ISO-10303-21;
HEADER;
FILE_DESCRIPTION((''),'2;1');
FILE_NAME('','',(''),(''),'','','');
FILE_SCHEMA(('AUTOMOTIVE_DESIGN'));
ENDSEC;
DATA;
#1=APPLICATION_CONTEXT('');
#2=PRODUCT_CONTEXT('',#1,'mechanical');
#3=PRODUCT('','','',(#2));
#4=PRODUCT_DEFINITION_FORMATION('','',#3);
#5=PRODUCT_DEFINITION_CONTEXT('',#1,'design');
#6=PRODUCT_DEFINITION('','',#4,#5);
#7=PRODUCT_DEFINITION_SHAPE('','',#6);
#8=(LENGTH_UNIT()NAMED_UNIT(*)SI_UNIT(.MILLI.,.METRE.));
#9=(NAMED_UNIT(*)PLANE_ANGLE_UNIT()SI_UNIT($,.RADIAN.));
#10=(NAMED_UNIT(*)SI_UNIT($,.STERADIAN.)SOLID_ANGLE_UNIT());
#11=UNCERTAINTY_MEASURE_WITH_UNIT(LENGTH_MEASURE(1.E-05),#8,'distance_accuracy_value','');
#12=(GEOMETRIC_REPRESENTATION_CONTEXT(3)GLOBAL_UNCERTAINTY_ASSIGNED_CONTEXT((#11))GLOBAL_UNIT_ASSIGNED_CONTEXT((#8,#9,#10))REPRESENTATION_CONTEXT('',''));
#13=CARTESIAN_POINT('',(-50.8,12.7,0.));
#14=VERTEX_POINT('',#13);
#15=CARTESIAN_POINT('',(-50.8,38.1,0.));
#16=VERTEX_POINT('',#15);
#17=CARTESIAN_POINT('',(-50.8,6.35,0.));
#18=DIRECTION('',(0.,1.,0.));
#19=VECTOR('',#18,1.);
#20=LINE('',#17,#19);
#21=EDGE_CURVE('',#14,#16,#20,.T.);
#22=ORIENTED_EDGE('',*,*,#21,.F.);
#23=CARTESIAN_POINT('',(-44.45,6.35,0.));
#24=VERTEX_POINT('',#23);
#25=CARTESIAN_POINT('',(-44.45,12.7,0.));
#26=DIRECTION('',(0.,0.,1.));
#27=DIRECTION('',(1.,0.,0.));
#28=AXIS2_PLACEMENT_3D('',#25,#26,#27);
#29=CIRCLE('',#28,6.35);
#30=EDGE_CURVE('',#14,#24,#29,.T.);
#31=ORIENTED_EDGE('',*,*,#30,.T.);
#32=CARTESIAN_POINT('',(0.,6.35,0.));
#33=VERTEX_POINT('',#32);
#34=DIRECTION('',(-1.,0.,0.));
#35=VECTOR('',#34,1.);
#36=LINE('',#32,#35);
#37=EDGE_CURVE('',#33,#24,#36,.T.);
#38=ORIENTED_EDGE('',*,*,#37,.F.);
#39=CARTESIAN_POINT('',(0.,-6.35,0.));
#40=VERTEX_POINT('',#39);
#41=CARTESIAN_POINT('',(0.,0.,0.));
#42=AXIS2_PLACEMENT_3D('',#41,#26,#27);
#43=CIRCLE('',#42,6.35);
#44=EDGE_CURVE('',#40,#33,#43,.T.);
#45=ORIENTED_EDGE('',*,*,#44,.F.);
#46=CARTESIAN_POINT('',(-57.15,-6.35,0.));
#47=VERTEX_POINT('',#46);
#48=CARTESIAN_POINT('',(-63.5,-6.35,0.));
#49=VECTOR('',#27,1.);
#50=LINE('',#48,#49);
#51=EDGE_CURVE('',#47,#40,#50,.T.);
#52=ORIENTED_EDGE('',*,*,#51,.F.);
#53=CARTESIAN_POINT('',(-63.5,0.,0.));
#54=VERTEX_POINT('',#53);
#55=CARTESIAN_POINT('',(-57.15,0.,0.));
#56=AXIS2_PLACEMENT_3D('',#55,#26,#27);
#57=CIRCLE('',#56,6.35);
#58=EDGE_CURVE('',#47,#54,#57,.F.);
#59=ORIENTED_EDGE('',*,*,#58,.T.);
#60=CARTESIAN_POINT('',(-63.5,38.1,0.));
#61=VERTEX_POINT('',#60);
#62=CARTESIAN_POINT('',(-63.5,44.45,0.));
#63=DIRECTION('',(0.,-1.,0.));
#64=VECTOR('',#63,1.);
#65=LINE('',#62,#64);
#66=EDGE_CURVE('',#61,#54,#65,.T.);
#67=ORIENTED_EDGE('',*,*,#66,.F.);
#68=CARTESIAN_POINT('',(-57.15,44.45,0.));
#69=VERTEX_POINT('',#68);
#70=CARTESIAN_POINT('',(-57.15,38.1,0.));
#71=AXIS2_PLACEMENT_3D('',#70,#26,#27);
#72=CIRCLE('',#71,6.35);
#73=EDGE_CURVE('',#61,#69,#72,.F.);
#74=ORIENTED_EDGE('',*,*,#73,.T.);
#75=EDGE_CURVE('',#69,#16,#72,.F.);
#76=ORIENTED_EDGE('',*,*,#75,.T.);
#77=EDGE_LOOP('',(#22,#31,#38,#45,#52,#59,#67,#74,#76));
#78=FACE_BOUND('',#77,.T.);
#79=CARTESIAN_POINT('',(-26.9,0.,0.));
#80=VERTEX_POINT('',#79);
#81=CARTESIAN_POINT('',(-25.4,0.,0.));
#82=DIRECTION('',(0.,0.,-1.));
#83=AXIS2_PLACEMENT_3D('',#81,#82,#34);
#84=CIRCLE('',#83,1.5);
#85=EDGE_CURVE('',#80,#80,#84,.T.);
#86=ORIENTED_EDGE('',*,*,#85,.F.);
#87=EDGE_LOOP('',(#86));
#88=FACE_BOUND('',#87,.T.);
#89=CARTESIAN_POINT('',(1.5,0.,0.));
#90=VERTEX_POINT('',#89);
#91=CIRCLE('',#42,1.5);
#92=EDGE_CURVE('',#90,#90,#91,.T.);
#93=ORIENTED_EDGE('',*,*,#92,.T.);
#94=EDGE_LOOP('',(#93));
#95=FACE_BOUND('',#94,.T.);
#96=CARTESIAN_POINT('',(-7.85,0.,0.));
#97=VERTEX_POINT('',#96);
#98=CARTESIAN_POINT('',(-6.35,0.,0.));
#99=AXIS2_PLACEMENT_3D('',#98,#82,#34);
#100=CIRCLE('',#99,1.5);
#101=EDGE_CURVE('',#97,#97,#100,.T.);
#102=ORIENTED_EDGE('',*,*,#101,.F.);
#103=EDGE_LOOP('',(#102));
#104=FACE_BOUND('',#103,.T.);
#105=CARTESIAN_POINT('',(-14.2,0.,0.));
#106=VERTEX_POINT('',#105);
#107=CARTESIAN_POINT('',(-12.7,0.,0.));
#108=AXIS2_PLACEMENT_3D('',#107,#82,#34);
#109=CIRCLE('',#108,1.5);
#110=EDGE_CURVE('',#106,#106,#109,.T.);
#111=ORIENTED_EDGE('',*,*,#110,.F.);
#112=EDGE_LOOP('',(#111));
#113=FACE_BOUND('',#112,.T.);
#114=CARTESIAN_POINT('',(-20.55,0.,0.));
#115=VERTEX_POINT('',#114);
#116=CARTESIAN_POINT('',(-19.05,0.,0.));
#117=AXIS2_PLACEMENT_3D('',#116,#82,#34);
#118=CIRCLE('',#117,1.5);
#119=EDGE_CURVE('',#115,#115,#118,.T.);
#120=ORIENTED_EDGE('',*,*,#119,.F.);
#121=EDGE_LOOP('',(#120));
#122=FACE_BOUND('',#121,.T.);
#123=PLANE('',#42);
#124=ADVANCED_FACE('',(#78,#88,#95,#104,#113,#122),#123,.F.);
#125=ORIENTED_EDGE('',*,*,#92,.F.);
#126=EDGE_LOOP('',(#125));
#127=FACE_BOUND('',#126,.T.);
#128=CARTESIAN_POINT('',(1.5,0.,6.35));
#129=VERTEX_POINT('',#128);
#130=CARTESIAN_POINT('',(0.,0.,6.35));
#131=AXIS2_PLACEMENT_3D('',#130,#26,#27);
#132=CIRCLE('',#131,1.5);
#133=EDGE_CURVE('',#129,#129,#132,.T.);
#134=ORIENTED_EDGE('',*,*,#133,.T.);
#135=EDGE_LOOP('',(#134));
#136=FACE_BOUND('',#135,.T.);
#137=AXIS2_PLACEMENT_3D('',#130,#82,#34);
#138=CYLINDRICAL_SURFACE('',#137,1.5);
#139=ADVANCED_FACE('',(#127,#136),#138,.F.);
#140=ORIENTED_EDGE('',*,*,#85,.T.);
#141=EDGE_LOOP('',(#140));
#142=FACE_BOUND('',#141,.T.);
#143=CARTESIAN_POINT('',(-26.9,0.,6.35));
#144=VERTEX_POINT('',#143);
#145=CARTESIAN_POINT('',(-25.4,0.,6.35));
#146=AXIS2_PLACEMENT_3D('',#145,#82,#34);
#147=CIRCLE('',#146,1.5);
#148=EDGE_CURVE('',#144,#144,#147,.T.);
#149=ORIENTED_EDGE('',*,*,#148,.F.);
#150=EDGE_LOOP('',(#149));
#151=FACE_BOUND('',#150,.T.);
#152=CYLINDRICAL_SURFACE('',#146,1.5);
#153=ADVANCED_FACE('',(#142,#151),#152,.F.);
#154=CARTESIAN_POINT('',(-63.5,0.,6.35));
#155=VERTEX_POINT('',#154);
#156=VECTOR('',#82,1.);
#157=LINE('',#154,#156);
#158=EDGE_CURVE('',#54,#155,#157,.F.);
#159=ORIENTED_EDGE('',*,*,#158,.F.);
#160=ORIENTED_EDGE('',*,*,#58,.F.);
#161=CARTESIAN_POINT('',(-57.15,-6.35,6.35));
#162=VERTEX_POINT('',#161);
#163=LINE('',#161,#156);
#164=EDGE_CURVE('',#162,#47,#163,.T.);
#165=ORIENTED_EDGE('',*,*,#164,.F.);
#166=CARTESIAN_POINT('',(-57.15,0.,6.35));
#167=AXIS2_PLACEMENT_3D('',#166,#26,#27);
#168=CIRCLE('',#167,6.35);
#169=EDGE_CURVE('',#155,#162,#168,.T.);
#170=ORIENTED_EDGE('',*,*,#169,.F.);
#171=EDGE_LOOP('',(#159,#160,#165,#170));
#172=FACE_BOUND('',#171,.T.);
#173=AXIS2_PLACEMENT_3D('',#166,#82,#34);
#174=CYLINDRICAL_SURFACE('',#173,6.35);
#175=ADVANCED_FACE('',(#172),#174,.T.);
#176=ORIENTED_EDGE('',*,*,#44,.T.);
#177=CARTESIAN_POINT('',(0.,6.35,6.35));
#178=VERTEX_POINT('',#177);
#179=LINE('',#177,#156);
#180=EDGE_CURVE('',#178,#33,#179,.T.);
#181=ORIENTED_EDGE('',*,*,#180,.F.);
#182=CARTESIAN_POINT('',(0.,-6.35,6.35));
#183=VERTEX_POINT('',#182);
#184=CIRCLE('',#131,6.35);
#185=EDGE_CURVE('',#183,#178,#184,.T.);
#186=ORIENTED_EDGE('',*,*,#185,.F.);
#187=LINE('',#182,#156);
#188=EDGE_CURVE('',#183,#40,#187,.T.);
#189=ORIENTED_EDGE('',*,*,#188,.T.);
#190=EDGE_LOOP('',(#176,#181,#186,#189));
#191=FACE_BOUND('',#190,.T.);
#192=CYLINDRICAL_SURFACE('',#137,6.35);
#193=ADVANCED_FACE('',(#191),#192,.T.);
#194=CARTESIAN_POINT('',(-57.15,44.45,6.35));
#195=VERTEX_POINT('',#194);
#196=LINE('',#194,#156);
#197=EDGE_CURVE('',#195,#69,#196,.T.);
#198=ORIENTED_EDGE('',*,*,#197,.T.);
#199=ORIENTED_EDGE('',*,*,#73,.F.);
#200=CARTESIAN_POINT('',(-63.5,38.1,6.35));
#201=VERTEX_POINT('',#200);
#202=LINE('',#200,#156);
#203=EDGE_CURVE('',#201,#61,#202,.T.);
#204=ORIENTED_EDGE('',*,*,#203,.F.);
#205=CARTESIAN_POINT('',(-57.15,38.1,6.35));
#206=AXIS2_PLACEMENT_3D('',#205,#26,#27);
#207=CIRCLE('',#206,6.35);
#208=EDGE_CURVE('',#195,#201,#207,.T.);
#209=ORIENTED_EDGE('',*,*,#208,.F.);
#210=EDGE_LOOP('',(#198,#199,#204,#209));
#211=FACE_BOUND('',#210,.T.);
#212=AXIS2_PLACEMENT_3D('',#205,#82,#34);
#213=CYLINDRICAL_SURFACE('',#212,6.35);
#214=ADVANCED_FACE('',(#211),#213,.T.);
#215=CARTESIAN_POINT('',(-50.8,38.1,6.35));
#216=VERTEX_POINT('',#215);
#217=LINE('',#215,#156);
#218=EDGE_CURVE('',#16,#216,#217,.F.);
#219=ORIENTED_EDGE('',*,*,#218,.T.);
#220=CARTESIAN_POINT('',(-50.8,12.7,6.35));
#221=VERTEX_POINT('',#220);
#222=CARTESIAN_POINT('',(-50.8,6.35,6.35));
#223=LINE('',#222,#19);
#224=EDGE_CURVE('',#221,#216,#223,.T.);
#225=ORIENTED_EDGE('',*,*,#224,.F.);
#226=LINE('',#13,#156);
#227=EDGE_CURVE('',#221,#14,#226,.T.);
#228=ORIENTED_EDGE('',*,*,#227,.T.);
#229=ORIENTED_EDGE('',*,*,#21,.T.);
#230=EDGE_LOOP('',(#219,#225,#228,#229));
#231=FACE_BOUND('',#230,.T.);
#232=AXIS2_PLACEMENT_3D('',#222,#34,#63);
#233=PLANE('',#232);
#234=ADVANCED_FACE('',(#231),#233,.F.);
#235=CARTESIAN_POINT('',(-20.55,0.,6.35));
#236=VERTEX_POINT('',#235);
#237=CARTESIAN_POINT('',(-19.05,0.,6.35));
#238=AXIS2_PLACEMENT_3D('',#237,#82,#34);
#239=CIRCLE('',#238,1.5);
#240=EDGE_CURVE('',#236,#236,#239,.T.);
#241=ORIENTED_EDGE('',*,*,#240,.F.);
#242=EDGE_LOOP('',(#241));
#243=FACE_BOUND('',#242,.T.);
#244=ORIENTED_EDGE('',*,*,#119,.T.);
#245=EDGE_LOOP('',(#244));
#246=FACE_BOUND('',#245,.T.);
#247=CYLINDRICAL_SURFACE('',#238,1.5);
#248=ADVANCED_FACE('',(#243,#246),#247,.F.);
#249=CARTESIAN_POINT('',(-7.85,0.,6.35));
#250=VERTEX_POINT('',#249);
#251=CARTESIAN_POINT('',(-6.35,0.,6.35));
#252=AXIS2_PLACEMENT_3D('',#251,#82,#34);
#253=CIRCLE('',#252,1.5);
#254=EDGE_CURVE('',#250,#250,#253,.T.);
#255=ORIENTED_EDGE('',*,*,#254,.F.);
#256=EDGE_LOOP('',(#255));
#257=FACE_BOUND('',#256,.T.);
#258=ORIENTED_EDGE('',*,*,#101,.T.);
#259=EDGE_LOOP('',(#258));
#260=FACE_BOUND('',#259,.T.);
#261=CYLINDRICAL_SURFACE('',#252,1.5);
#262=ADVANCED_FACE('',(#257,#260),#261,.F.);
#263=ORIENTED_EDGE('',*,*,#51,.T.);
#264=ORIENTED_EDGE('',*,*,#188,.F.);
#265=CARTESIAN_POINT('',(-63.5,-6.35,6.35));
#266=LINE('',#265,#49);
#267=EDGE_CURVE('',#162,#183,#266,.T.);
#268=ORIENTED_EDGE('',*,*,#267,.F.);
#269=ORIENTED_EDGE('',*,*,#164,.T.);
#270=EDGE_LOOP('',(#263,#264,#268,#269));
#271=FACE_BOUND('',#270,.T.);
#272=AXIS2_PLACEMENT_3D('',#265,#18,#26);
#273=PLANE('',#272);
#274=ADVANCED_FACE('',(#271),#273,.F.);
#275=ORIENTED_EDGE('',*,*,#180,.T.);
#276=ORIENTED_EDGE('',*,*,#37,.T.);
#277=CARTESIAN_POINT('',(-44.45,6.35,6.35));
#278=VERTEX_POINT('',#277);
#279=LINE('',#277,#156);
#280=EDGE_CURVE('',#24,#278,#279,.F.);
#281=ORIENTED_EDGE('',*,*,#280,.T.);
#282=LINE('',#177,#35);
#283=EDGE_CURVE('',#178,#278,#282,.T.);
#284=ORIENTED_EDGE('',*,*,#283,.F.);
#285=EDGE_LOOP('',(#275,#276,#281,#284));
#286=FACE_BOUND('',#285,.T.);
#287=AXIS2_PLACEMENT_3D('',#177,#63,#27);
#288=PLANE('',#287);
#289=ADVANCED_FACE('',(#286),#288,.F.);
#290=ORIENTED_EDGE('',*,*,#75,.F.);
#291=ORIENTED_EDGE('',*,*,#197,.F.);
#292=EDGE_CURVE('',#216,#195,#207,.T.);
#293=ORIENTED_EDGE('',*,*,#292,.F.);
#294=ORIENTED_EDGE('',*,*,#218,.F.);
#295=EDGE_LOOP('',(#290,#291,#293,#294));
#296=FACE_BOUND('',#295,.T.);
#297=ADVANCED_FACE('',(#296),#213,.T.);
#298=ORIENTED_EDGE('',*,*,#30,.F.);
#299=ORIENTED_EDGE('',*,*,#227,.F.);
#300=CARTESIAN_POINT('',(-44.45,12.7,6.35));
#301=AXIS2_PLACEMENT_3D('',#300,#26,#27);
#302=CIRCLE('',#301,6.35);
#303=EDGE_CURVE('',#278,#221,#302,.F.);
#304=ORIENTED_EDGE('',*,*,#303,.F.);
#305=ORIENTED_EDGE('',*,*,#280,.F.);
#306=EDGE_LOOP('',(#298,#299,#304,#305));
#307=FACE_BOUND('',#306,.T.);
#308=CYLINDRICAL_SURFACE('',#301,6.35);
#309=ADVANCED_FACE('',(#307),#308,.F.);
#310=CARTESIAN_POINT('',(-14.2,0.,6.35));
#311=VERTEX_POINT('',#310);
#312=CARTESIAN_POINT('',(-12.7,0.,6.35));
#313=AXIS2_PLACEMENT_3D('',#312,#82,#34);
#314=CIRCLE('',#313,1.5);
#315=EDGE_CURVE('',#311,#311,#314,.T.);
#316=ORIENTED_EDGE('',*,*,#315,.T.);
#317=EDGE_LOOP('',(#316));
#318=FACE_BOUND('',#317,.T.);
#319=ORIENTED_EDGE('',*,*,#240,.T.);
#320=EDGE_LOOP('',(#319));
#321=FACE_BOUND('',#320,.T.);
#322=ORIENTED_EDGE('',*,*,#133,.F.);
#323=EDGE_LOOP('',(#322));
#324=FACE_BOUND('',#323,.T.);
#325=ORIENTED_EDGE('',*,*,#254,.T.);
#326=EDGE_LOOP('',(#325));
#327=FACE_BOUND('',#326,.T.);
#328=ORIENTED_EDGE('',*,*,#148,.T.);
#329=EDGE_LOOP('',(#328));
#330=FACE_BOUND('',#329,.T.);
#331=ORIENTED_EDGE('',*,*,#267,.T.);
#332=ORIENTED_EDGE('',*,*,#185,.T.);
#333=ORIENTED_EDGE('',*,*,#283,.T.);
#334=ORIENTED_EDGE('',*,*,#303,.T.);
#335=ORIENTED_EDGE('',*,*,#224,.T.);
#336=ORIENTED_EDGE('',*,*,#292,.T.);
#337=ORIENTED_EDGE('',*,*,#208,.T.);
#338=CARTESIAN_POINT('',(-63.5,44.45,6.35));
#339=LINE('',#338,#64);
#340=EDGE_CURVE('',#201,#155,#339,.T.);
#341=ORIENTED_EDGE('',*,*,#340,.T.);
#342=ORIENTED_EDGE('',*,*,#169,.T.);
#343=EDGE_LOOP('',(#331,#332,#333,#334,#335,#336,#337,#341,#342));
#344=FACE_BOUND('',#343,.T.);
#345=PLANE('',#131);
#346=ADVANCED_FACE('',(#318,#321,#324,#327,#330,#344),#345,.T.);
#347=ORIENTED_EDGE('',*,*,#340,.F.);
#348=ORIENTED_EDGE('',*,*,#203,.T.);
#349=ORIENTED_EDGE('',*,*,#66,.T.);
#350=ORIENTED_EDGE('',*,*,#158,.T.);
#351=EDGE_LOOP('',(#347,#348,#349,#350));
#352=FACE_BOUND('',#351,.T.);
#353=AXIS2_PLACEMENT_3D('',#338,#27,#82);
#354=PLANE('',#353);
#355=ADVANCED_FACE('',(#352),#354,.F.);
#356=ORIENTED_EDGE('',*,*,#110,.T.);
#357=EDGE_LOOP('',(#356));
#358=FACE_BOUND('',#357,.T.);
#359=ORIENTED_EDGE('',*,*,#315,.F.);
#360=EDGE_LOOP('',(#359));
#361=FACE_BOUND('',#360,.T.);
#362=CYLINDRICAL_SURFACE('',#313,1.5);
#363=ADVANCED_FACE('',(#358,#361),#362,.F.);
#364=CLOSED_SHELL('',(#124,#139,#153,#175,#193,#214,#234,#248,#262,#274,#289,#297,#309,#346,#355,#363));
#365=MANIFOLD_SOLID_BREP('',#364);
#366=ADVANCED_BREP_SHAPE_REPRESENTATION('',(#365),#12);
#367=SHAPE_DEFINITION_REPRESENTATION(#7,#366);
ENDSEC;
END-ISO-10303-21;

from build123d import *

# Parameters (mm, degrees)
SKETCH1_R           = 1.5
BOSS_EXTRUDE1_DEPTH = 6.35
FILLET1_R           = 6.35
SKETCH2_R           = 1.5
CUT_EXTRUDE1_DEPTH  = 78.771299333


with BuildPart() as part:
    # Sketch1 → Boss-Extrude1 (new body)
    with BuildSketch(Plane.XY):
        with BuildLine():
            Line((0, 6.35), (-50.8, 6.35))
            Line((-50.8, 6.35), (-50.8, 44.45))
            Line((-50.8, 44.45), (-63.5, 44.45))
            Line((-63.5, 44.45), (-63.5, -6.35))
            Line((-63.5, -6.35), (0, -6.35))
            ThreePointArc((0, -6.35), (6.35, 0), (0, 6.35))
        make_face()
        Circle(SKETCH1_R, mode=Mode.SUBTRACT)
    extrude(amount=BOSS_EXTRUDE1_DEPTH)

    # Fillet1
    fillet1_edges = [part.edges().sort_by_distance(p)[0] for p in [
        (-63.5, -6.35, 3.175),
        (-50.8, 6.35, 3.175),
        (-63.5, 44.45, 3.175),
        (-50.8, 44.45, 3.175),
    ]]
    fillet(fillet1_edges, radius=FILLET1_R - 0.0001)  # a hair under: the kernel refuses the full size

    # Sketch2 → Cut-Extrude1 (cut, through all)
    with BuildSketch(Plane(origin=(0, 0, 0), x_dir=(-1, 0, 0), z_dir=(0, 0, -1))):
        with Locations((6.35, 0)):
            Circle(SKETCH2_R)
        with Locations((12.7, 0)):
            Circle(SKETCH2_R)
        with Locations((25.4, 0)):
            Circle(SKETCH2_R)
        with Locations((19.05, 0)):
            Circle(SKETCH2_R)
    extrude(amount=-CUT_EXTRUDE1_DEPTH, mode=Mode.SUBTRACT)


solid = part.part
